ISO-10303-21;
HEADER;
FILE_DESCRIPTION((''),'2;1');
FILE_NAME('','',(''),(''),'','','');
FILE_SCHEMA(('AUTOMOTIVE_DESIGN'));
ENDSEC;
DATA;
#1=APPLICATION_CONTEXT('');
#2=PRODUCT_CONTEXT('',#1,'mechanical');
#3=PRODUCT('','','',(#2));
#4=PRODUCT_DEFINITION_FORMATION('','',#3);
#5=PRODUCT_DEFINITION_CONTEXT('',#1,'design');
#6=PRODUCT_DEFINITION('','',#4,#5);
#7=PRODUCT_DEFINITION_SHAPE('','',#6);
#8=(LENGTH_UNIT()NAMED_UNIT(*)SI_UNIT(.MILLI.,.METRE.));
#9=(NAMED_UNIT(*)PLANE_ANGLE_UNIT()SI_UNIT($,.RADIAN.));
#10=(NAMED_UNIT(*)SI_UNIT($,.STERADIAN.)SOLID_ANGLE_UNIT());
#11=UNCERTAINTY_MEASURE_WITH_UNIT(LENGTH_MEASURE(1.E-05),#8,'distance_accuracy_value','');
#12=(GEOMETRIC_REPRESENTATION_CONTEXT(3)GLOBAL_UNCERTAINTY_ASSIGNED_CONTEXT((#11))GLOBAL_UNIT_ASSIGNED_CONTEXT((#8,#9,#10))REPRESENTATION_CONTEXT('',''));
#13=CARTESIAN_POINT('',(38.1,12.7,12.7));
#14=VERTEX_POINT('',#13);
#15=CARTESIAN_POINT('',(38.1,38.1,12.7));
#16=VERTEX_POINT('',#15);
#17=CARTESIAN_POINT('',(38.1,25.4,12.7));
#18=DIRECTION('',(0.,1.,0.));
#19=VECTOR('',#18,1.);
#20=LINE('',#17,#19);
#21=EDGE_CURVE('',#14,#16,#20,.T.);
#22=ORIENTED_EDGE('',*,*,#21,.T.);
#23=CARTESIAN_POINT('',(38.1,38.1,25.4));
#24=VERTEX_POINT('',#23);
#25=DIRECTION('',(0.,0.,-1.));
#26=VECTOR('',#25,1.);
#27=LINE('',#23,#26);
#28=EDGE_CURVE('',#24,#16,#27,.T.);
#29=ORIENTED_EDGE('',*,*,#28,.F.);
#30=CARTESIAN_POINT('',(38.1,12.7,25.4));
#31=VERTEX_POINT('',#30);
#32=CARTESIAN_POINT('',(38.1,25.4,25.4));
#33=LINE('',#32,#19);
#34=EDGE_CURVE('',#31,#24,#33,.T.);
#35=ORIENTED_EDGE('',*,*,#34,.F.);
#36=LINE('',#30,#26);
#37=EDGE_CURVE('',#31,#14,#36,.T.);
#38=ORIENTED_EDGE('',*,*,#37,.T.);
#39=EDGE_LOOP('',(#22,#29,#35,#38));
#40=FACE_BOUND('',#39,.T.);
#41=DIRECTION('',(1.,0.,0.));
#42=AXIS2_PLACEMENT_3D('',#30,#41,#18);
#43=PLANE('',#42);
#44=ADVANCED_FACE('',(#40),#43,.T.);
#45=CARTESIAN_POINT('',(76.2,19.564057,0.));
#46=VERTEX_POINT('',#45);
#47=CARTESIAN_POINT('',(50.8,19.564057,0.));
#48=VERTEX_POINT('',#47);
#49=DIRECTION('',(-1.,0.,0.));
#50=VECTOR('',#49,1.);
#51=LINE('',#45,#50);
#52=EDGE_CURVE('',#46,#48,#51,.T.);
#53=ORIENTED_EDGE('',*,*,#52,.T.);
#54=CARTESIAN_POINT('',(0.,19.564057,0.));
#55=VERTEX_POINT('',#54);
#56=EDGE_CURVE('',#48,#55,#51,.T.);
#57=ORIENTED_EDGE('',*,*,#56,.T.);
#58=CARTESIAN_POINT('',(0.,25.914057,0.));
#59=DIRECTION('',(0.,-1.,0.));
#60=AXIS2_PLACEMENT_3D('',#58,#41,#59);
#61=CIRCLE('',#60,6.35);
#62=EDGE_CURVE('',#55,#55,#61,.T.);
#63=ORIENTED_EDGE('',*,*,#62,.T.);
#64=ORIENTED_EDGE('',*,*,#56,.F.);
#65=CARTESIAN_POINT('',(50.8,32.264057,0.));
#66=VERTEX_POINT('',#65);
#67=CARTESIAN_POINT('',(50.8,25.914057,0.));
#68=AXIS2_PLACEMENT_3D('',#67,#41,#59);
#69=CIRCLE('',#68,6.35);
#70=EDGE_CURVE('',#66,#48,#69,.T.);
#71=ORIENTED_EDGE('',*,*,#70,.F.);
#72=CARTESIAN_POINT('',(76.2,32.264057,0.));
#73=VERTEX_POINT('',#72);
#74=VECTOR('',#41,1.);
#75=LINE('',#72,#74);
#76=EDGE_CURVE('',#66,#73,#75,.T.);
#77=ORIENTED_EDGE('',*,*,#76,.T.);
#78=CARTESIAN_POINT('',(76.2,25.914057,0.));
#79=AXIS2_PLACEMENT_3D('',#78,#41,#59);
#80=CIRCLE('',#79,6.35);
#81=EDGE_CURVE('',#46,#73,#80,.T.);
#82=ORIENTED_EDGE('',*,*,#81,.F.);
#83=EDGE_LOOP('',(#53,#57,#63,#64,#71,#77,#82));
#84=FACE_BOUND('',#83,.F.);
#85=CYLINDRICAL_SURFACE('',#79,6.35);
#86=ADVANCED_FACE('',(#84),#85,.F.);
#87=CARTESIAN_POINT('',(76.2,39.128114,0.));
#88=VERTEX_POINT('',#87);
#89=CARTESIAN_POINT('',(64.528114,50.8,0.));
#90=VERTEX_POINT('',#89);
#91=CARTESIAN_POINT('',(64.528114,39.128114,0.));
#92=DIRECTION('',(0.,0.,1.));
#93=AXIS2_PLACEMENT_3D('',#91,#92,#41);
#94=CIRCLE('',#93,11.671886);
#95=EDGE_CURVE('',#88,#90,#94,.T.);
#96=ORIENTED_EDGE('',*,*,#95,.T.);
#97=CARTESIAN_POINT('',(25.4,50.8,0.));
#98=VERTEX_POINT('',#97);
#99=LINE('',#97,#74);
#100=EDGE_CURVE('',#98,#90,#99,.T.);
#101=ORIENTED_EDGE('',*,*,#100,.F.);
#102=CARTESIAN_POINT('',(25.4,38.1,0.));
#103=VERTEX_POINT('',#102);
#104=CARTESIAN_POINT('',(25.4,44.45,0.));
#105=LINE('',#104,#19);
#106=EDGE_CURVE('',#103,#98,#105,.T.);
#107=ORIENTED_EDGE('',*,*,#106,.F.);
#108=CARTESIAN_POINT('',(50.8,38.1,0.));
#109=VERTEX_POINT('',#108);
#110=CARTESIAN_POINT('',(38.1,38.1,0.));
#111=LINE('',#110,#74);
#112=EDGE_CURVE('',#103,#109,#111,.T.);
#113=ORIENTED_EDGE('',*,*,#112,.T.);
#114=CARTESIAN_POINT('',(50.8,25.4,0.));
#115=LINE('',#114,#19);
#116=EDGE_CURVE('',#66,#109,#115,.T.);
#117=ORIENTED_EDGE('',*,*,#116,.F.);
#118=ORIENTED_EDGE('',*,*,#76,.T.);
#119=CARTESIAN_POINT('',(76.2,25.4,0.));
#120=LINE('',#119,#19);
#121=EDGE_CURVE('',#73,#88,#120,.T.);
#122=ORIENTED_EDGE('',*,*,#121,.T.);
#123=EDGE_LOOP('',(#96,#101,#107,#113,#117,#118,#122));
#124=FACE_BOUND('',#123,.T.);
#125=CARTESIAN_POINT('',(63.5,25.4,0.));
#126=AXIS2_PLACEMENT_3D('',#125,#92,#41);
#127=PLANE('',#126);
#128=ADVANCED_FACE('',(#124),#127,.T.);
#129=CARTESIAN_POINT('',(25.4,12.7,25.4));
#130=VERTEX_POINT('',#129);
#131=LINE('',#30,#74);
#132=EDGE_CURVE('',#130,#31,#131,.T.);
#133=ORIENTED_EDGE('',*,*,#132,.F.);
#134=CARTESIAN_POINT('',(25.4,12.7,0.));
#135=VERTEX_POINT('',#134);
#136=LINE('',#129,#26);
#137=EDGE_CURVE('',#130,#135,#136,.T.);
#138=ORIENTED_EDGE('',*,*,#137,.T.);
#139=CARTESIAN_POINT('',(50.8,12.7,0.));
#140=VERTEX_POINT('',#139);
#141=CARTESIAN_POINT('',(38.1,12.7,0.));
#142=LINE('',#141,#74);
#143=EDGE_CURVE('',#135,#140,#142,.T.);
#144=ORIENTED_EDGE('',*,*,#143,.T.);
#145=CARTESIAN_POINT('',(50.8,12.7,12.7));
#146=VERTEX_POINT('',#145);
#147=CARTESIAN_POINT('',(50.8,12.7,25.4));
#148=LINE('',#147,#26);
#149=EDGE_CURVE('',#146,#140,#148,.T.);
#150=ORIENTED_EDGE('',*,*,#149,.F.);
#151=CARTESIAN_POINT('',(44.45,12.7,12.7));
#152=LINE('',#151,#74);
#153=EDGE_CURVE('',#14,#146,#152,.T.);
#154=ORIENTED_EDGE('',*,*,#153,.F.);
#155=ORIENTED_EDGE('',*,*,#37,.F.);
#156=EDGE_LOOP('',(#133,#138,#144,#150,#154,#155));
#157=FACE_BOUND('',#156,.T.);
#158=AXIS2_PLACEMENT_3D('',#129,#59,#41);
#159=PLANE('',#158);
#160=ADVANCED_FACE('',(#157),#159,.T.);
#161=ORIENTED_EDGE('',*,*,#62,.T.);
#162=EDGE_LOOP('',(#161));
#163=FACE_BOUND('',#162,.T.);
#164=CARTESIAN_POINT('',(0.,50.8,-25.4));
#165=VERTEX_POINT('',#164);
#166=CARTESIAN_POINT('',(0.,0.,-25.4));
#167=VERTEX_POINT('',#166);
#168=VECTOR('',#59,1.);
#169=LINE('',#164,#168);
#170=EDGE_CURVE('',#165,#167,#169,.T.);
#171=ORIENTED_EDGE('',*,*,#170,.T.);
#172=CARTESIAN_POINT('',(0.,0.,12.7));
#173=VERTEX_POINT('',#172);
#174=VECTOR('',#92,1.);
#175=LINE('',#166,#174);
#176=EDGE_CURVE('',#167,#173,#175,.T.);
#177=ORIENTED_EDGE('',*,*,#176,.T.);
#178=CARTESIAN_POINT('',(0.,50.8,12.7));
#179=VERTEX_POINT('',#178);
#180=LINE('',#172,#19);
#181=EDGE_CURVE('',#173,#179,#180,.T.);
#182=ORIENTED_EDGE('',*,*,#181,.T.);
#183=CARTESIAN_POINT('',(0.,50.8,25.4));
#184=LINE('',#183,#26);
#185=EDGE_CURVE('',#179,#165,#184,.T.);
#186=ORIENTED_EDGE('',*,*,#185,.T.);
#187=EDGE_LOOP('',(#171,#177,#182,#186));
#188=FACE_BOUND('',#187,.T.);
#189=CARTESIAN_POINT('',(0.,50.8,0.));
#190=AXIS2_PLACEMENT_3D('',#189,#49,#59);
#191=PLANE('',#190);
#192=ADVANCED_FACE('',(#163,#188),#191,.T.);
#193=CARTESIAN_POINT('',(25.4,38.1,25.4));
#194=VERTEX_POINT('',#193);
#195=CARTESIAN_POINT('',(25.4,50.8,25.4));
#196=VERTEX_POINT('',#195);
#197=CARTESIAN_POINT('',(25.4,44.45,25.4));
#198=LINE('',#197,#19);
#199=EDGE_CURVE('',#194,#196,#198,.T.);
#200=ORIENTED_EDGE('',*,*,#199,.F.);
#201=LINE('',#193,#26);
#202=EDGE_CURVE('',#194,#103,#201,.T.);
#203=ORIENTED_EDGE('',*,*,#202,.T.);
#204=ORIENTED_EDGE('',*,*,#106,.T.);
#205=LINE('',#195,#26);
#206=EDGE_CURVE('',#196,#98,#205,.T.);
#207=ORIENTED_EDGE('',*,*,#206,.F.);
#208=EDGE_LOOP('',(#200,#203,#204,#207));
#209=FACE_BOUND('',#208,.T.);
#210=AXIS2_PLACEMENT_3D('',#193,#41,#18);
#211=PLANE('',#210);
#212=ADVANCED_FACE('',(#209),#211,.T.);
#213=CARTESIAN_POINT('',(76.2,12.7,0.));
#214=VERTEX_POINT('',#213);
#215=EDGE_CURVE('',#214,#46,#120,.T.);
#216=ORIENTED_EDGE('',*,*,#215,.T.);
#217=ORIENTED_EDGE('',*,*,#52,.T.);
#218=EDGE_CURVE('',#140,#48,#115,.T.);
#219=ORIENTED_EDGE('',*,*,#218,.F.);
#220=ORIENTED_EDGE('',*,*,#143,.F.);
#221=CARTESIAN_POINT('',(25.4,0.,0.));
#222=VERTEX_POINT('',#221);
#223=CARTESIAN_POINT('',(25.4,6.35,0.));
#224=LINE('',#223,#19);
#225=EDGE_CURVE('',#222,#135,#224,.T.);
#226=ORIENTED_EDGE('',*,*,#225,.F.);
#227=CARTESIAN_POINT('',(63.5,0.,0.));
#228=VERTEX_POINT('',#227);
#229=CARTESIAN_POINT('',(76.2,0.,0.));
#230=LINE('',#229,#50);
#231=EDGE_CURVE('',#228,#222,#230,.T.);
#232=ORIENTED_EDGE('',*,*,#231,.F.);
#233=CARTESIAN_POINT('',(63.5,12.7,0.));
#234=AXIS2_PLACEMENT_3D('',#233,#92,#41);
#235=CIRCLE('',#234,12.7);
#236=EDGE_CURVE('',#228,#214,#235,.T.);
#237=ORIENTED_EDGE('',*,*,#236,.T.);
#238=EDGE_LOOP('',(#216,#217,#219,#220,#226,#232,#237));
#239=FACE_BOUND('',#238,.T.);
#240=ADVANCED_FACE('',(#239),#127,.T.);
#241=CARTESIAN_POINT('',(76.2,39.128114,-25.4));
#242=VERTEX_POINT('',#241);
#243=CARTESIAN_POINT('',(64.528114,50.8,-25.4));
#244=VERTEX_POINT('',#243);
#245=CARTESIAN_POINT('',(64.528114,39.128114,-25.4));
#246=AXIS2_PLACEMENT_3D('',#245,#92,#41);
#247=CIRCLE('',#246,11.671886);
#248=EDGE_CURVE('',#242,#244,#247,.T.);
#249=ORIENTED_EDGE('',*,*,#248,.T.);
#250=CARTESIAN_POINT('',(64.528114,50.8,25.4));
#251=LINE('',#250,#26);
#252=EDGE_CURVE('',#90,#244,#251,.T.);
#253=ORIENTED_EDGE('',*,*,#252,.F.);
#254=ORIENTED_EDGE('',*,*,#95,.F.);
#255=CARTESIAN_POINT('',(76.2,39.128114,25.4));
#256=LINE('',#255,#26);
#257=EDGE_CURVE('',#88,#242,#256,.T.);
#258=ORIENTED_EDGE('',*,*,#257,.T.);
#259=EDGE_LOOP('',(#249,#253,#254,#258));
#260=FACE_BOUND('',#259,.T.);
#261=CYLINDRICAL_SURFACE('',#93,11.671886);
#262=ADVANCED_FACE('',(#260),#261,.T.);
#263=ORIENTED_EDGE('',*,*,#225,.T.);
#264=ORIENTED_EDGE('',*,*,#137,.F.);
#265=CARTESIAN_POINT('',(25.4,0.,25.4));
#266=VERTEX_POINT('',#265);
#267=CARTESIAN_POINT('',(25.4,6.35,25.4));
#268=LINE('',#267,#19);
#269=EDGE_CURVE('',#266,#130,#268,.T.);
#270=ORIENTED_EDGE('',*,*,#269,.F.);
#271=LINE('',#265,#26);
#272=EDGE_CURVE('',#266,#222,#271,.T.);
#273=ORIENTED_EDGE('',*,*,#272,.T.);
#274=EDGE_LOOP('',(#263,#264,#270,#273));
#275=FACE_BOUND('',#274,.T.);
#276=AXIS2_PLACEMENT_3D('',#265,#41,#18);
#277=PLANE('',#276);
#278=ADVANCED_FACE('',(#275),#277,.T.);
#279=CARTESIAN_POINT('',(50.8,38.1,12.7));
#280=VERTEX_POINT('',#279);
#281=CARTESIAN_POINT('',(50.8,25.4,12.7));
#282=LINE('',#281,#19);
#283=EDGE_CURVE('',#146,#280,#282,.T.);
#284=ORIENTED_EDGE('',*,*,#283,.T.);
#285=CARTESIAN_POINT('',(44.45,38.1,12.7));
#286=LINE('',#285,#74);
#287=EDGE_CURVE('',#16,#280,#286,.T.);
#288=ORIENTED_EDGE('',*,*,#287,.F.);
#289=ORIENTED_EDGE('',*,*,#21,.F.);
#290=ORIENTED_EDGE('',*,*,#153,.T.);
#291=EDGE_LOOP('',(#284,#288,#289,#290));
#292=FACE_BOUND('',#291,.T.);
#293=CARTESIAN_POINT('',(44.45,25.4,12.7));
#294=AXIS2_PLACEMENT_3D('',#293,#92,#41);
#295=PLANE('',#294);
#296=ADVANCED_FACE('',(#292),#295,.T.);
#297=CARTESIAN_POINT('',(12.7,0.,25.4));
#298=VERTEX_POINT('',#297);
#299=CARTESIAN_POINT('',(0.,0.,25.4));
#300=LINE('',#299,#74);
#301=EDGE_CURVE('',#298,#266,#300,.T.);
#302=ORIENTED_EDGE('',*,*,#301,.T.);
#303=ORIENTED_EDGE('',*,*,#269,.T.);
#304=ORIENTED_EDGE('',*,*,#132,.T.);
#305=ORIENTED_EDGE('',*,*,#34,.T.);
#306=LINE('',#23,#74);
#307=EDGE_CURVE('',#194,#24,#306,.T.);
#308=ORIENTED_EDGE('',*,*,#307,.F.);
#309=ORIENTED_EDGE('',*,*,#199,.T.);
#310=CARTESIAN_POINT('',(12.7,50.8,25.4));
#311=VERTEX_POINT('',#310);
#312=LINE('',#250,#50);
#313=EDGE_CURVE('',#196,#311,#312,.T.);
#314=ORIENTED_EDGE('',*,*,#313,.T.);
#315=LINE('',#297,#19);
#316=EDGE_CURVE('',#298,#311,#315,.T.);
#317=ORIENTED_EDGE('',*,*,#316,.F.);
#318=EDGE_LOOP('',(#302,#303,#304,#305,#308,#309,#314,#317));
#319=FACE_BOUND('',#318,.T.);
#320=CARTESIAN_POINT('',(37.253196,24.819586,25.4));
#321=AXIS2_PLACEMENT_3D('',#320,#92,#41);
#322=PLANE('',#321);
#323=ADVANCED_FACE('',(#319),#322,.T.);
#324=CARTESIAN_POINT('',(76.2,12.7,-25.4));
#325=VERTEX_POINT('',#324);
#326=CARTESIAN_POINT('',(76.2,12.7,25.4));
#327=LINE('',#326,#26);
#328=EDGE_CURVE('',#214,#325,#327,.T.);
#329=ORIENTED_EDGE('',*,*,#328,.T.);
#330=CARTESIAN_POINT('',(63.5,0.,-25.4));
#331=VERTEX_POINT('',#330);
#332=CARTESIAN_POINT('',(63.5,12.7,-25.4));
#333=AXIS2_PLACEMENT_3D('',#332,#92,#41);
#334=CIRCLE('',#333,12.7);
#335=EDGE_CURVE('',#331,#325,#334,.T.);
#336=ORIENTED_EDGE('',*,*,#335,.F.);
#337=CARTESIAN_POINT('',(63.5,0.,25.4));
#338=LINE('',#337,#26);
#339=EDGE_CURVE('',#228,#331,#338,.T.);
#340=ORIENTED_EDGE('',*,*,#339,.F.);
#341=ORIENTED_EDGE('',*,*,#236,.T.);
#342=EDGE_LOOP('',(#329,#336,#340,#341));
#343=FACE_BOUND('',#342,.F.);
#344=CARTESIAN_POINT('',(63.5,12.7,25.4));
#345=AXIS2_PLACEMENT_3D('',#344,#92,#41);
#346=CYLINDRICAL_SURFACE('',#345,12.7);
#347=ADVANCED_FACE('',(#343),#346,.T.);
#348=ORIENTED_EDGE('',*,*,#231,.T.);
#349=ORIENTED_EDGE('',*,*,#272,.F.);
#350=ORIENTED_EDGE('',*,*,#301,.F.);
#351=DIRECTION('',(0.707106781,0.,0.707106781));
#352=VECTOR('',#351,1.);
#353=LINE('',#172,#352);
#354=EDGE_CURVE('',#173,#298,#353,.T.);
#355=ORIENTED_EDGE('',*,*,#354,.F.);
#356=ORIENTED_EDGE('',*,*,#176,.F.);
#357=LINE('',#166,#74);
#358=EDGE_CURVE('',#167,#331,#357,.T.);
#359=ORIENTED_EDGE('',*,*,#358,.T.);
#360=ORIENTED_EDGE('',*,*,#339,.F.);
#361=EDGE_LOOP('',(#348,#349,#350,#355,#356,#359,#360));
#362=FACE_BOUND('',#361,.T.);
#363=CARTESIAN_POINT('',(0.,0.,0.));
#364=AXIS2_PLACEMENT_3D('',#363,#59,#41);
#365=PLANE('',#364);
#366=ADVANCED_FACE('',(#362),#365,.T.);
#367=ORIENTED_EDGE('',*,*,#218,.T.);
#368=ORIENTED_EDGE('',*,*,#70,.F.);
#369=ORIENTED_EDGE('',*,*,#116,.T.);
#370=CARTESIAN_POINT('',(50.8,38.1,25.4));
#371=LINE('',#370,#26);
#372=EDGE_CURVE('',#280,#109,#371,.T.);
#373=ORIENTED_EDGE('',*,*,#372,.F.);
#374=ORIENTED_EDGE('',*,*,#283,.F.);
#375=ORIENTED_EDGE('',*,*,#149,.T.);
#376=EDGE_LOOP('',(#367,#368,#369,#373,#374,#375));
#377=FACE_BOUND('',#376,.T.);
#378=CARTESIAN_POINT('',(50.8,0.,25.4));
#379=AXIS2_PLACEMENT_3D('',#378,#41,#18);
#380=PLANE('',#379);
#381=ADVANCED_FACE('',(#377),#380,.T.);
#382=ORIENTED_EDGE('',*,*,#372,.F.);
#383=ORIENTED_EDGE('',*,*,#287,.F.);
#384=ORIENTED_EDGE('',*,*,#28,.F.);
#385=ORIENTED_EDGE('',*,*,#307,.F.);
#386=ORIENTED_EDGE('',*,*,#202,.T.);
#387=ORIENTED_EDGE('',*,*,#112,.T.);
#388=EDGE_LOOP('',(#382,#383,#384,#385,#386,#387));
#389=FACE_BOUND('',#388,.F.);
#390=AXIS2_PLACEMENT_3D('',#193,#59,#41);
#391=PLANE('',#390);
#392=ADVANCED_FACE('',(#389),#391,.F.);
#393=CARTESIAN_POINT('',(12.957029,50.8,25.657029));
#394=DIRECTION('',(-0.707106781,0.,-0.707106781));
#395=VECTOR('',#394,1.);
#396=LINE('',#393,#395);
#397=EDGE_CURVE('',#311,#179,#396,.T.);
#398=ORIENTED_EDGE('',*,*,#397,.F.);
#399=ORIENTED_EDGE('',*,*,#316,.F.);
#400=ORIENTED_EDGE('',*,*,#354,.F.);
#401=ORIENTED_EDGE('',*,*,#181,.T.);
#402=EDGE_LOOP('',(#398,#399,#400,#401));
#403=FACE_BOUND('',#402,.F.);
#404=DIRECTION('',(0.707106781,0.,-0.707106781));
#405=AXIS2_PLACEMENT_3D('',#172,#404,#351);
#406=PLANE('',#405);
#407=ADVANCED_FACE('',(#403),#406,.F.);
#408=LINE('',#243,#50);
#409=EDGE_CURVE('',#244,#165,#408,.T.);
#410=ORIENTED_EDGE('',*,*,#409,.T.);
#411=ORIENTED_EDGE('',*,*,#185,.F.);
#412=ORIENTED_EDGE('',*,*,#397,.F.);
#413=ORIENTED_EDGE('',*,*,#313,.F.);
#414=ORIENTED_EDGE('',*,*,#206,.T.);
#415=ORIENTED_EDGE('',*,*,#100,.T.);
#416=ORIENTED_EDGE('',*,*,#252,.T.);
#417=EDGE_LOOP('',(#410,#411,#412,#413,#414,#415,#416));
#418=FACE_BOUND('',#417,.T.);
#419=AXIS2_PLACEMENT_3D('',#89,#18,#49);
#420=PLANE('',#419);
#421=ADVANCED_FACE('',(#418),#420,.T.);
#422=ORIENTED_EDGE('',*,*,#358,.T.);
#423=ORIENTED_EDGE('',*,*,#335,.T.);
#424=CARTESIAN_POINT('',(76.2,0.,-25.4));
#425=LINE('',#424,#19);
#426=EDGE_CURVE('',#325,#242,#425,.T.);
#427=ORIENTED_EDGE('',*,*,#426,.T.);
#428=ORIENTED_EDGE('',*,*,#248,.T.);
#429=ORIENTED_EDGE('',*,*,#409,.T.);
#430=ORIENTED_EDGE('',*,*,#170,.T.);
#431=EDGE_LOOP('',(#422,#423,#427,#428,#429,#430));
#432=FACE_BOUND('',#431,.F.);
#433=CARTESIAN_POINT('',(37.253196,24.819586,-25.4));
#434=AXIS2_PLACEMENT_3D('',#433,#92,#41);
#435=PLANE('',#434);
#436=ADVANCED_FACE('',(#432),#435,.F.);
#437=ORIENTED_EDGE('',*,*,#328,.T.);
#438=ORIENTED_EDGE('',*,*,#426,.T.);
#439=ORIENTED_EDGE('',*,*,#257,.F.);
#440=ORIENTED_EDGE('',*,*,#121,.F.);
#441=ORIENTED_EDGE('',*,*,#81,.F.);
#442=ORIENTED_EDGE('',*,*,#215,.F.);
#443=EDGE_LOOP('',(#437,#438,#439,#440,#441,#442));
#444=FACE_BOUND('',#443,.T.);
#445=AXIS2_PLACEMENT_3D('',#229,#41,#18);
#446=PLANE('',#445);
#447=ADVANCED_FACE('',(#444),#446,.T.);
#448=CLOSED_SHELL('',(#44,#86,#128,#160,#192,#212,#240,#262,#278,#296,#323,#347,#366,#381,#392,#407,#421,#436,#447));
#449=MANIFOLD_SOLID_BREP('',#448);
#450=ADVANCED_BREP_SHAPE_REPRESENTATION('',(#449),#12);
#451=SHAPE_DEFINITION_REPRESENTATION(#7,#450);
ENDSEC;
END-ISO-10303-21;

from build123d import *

# Parameters (mm, degrees)
F1_DEPTH  = 25.4
F3_DEPTH  = 50.801
F4_W      = 25.4
F4_H      = 12.7
F5_DEPTH  = 25.4
F6_W      = 25.4
F6_H      = 50.8
F7_DEPTH  = 25.4
F8_W      = 12.7
F8_H      = 25.4
F9_DEPTH  = 12.7
F10_DEPTH = 50.801
F12_DEPTH = 76.201


with BuildPart() as f1:
    # F0 (on Top) → F1 (new body, symmetric)
    with BuildSketch(Plane.XY):
        with BuildLine():
            Line((0, 50.8), (0, 0))
            Line((0, 0), (76.2, 0))
            Line((76.2, 0), (76.2, 39.1281142461))
            ThreePointArc((76.2, 39.1281142461), (72.7813838119, 47.3813838119), (64.5281142461, 50.8))
            Line((64.5281142461, 50.8), (0, 50.8))
        make_face()
    extrude(amount=F1_DEPTH, both=True)

    # F2 (on face) → F3 (cut, through all)
    with BuildSketch(Plane.XZ):
        Polygon((12.7, 25.4), (0, 25.4), (0, 12.7), align=None)
    extrude(amount=-F3_DEPTH, mode=Mode.SUBTRACT)

    # F4 (on face) → F5 (cut)
    with BuildSketch(Plane.XY.offset(25.4)):
        with Locations((38.1, 44.45)):
            Rectangle(F4_W, F4_H)
        with Locations((38.1, 6.35)):
            Rectangle(F4_W, F4_H)
    extrude(amount=-F5_DEPTH, mode=Mode.SUBTRACT)

    # F6 (on face) → F7 (cut, through all)
    with BuildSketch(Plane.XY.offset(25.4)):
        with Locations((63.5, 25.4)):
            Rectangle(F6_W, F6_H)
    extrude(amount=-F7_DEPTH, mode=Mode.SUBTRACT)

    # F8 (on face) → F9 (cut)
    with BuildSketch(Plane.XY.offset(25.4)):
        with Locations((44.45, 25.4)):
            Rectangle(F8_W, F8_H)
    extrude(amount=-F9_DEPTH, mode=Mode.SUBTRACT)

    # F4 (on face) → F10 (cut, through all)
    with BuildSketch(Plane.XY.offset(25.4)):
        with BuildLine():
            Line((76.2, 0), (76.2, 12.7))
            ThreePointArc((76.2, 12.7), (72.4802561211, 3.7197438789), (63.5, 0))
            Line((63.5, 0), (76.2, 0))
        make_face()
    extrude(amount=-F10_DEPTH, mode=Mode.SUBTRACT)

    # F11 (on face) → F12 (cut, through all)
    with BuildSketch(Plane.YZ.offset(76.2)):
        with BuildLine():
            Line((19.564057123, 0), (32.264057123, 0))
            ThreePointArc((32.264057123, 0), (25.914057123, 6.35), (19.564057123, 0))
        make_face()
        with BuildLine():
            ThreePointArc((19.564057123, 0), (25.914057123, -6.35), (32.264057123, 0))
            Line((32.264057123, 0), (19.564057123, 0))
        make_face()
    extrude(amount=-F12_DEPTH, mode=Mode.SUBTRACT)


solid = f1.part
